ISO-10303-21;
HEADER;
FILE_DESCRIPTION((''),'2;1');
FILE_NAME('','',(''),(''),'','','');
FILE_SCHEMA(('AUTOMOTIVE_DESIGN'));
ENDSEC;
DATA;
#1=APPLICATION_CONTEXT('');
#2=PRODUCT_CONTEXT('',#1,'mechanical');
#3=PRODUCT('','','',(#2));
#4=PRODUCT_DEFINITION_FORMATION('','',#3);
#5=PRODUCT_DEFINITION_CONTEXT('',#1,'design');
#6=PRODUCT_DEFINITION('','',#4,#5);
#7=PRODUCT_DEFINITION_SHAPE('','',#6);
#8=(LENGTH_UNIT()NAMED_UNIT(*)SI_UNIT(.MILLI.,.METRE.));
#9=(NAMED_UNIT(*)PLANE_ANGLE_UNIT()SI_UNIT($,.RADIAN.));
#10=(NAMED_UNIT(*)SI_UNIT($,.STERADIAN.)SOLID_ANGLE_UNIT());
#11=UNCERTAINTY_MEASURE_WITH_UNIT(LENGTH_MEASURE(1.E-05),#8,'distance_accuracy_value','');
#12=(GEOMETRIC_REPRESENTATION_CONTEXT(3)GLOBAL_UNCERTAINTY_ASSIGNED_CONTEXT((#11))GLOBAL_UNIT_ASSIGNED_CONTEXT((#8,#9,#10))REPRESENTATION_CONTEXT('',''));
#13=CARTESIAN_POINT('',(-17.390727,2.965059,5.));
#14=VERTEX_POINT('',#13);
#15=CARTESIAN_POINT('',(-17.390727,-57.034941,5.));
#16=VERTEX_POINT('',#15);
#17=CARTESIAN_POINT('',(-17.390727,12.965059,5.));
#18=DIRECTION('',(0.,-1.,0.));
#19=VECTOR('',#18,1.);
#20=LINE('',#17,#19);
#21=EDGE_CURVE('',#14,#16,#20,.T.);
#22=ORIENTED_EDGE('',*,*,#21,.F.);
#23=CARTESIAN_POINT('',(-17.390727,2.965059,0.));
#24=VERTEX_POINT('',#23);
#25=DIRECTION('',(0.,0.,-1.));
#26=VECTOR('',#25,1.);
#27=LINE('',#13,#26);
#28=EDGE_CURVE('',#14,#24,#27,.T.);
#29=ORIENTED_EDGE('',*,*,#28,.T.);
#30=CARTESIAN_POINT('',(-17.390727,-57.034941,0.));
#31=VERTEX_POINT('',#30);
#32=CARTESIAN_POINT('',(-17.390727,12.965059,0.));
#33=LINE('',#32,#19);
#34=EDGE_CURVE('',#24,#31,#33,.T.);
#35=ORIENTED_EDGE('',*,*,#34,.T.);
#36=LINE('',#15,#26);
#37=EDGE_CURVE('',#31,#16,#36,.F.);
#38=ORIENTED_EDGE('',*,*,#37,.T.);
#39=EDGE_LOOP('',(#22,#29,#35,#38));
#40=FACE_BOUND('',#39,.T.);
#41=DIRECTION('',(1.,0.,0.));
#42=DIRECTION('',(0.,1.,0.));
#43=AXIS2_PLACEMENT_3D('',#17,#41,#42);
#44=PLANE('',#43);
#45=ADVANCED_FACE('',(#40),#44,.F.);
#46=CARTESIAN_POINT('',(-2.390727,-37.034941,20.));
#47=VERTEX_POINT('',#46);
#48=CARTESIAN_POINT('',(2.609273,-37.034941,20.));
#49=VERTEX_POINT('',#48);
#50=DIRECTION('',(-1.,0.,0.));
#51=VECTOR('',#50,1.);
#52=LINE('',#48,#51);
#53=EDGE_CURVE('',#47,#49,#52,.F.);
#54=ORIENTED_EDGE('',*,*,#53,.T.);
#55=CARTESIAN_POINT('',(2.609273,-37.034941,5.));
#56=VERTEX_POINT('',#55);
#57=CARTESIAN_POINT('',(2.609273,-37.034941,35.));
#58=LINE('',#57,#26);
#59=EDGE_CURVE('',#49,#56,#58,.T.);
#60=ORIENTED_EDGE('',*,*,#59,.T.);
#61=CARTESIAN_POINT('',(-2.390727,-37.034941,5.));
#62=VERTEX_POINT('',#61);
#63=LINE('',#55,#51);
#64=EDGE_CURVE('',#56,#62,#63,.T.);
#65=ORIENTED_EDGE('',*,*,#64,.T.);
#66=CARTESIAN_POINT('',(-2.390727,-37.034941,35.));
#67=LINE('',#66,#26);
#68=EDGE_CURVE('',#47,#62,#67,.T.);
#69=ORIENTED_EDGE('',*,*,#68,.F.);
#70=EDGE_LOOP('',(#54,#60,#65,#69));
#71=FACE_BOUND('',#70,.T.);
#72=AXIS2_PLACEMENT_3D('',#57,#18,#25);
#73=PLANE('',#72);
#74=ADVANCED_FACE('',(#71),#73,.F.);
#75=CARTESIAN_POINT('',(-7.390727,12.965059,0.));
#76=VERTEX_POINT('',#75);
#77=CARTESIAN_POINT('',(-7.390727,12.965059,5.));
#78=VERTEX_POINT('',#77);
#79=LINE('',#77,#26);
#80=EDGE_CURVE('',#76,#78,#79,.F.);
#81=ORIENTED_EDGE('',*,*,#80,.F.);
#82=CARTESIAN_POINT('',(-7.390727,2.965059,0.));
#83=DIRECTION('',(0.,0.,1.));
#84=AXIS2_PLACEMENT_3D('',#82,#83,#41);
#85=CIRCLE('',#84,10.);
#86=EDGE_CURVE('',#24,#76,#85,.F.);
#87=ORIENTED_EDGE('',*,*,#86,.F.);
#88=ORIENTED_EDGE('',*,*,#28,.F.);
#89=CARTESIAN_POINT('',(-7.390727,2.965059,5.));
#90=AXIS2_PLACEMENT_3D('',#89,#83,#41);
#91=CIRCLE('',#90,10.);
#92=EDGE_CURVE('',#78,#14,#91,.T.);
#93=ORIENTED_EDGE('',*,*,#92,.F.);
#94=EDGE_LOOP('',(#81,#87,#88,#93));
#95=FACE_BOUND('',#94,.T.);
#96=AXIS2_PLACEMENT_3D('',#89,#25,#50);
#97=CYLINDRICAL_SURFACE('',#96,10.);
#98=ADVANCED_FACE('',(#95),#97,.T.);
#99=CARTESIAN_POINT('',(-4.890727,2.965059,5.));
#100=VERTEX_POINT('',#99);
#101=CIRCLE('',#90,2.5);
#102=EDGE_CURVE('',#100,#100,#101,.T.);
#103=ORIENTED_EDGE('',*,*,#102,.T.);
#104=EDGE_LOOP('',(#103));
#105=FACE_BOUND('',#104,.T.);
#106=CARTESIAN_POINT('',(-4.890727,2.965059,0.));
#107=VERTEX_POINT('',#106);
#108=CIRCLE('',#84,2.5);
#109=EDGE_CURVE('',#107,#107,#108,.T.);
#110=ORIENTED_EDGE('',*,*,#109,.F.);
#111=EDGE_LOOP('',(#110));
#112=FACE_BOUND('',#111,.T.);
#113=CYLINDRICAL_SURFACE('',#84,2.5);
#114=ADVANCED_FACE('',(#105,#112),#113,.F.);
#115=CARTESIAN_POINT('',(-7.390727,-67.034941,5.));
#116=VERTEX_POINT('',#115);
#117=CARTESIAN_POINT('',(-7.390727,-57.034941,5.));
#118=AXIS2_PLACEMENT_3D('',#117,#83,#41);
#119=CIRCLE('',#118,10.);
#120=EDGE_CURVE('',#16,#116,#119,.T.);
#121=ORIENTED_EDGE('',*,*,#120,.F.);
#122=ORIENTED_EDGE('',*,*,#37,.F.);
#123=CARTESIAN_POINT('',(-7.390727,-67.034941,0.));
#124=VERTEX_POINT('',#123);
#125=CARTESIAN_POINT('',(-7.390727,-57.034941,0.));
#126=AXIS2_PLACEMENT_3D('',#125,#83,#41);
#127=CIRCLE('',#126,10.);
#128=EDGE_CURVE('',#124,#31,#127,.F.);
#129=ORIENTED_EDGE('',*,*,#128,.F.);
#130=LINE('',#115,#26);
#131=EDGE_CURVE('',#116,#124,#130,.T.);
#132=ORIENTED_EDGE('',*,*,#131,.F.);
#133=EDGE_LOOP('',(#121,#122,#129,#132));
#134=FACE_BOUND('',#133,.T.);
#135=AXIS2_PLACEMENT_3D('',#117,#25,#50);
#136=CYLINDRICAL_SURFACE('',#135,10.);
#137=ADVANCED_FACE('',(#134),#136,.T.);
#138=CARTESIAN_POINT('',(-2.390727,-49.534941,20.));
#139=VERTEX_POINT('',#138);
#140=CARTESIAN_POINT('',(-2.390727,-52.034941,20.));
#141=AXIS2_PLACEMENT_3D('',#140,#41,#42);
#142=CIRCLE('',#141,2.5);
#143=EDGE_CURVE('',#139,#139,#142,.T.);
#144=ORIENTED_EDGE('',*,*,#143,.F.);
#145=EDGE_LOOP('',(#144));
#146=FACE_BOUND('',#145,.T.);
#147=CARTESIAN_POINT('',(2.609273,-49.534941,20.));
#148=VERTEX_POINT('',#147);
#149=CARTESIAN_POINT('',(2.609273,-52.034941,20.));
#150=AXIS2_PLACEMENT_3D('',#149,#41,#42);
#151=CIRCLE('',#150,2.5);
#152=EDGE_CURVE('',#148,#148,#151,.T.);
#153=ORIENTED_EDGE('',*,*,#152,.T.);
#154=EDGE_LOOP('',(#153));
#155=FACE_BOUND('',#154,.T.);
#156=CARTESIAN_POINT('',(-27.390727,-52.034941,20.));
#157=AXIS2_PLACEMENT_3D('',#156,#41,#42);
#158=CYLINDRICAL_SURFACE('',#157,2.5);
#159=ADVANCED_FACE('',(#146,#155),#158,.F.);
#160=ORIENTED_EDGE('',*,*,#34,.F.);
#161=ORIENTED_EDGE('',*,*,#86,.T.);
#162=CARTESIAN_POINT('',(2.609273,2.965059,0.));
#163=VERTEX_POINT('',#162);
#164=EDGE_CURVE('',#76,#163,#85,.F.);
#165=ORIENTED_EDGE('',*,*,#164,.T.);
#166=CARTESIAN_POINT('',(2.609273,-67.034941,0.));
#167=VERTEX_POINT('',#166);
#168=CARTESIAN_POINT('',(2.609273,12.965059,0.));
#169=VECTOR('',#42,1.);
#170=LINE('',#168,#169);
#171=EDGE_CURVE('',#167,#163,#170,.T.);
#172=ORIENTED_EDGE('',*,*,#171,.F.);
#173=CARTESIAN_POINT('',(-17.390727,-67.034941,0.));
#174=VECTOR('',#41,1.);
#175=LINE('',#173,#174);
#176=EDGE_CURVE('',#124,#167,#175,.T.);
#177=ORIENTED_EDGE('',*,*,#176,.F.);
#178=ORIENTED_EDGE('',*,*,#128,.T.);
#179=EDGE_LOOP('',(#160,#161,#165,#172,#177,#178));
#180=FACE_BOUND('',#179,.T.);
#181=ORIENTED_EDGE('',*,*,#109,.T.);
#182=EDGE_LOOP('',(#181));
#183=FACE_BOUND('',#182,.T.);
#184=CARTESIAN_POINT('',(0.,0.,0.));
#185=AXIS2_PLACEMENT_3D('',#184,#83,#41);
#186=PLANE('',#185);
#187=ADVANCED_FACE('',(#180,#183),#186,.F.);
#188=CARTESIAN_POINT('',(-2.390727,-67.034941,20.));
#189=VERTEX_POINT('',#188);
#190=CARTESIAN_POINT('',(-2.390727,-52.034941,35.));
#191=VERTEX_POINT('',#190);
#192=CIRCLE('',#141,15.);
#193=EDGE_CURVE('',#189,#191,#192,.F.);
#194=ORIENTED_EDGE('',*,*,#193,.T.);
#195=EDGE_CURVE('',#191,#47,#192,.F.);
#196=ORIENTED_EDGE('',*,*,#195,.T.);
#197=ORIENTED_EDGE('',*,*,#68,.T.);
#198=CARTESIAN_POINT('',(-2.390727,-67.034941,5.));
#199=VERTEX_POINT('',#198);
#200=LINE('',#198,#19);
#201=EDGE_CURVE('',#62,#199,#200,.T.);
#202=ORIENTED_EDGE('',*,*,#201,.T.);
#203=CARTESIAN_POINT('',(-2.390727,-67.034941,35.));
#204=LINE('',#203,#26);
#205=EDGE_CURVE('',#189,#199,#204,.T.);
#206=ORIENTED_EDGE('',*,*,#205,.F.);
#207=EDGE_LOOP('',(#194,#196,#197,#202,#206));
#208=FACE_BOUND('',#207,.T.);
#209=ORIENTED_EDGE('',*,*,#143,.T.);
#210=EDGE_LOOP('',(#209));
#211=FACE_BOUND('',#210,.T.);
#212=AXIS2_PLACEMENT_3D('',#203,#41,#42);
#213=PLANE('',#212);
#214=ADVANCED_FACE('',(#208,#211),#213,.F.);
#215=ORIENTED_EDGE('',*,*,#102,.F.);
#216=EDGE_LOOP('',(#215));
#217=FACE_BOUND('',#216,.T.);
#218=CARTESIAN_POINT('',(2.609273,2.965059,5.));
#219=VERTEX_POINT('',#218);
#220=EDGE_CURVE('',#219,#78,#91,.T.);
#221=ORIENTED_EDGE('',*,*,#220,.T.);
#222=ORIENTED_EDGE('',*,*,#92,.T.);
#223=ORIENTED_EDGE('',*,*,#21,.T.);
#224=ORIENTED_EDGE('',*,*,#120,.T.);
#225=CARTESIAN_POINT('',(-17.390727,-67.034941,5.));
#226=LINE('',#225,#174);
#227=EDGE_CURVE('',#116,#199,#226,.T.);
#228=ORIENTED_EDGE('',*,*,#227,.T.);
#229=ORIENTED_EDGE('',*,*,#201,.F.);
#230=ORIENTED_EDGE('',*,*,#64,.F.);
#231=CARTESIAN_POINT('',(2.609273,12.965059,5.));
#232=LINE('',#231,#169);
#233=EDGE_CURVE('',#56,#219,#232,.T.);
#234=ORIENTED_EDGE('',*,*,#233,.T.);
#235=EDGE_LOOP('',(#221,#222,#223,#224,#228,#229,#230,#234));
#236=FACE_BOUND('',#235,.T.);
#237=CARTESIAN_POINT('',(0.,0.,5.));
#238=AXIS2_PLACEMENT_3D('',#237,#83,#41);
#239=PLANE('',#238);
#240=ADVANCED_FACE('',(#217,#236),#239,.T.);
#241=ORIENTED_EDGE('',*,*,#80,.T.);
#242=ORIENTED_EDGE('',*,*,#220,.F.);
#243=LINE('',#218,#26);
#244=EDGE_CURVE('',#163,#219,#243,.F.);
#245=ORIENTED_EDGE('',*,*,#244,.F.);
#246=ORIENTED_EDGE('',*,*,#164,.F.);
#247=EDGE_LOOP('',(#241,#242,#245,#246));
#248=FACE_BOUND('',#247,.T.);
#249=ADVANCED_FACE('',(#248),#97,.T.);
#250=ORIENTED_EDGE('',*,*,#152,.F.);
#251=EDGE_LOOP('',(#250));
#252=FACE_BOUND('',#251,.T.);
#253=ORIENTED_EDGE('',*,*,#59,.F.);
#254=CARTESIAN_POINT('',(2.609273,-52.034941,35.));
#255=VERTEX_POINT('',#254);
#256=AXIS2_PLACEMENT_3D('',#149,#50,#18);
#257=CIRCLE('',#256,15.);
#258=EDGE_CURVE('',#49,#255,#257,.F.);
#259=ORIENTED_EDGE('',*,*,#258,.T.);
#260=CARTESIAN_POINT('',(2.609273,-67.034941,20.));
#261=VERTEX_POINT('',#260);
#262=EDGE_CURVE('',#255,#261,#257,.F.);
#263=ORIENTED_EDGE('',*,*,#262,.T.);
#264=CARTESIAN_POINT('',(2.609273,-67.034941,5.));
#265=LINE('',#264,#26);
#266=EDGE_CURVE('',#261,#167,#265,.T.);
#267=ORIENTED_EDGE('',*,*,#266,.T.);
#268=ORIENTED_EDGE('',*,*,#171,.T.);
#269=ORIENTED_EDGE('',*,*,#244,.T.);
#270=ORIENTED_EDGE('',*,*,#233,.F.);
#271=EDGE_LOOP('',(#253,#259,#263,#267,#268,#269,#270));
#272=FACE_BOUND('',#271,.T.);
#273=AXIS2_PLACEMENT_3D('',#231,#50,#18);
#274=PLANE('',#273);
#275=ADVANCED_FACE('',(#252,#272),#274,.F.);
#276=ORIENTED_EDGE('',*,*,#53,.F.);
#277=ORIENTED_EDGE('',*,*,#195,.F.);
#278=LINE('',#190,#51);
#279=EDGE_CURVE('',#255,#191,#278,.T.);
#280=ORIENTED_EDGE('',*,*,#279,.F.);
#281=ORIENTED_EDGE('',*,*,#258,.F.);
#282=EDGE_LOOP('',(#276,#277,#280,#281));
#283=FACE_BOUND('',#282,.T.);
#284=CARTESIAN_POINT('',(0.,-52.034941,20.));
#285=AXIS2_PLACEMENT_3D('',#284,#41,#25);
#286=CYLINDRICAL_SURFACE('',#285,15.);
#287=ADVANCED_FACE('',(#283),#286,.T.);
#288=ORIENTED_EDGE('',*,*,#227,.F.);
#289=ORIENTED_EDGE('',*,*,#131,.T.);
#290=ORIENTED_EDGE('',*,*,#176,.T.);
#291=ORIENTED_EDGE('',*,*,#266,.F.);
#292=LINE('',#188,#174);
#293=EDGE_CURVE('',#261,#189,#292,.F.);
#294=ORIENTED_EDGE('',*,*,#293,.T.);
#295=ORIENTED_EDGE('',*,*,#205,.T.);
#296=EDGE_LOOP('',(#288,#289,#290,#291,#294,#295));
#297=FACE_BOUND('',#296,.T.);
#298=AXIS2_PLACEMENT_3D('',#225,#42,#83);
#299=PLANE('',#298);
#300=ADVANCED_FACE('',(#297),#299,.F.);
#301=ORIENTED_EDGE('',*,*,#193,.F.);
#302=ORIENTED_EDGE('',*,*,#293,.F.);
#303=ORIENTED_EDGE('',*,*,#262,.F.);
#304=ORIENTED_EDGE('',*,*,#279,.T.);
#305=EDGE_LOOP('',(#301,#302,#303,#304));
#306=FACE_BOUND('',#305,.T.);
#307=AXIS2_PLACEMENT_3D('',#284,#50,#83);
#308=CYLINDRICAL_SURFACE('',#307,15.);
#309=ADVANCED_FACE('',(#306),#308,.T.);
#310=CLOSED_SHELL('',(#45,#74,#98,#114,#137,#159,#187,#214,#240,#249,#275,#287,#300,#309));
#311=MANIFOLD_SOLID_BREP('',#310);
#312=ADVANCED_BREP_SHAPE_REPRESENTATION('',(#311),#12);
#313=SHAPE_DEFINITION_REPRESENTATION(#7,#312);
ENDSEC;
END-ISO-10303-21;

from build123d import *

# Parameters (mm, degrees)
ESQUISSE1_W             = 20
ESQUISSE1_H             = 80
BOSS_EXTRU_1_DEPTH      = 5
ESQUISSE2_R             = 2.5
ENL_V_MAT_EXTRU_1_DEPTH = 5
ESQUISSE3_W             = 5
ESQUISSE3_H             = 30
BOSS_EXTRU_2_DEPTH      = 30
ESQUISSE4_R             = 2.5
ENL_V_MAT_EXTRU_2_DEPTH = 30
CONG_1_R                = 15
CONG_2_R                = 10


with BuildPart() as part:
    # Esquisse1 → Boss.-Extru.1 (new body)
    with BuildSketch(Plane.XY):
        with Locations((-7.390726734, -27.034940778)):
            Rectangle(ESQUISSE1_W, ESQUISSE1_H)
    extrude(amount=BOSS_EXTRU_1_DEPTH)

    # Esquisse2 → Enlèv. mat.-Extru.1 (cut)
    with BuildSketch(Plane.XY.offset(5)):
        with Locations((-7.390726734, 2.965059222)):
            Circle(ESQUISSE2_R)
    extrude(amount=-ENL_V_MAT_EXTRU_1_DEPTH, mode=Mode.SUBTRACT)

    # Esquisse3 → Boss.-Extru.2 (add)
    with BuildSketch(Plane.XY.offset(5)):
        with Locations((0.109273266, -52.034940778)):
            Rectangle(ESQUISSE3_W, ESQUISSE3_H)
    extrude(amount=BOSS_EXTRU_2_DEPTH)

    # Esquisse4 → Enlèv. mat.-Extru.2 (cut)
    with BuildSketch(Plane(origin=(2.609273266, 0, 0), x_dir=(0, 0, -1), z_dir=(1, 0, 0))):
        with Locations(Location((-20, -52.034940778, 0), (0, 0, 90))):
            Circle(ESQUISSE4_R)
    extrude(amount=-ENL_V_MAT_EXTRU_2_DEPTH, mode=Mode.SUBTRACT)

    # Congé1
    cong_1_edges = [part.edges().sort_by_distance(p)[0] for p in [
        (0.109273266, -67.034940778, 35),
        (0.109273266, -37.034940778, 35),
    ]]
    fillet(cong_1_edges, radius=CONG_1_R - 0.0001)  # a hair under: the kernel refuses the full size

    # Congé2
    cong_2_edges = [part.edges().sort_by_distance(p)[0] for p in [
        (-17.390726734, -67.034940778, 2.5),
        (2.609273266, 12.965059222, 2.5),
        (-17.390726734, 12.965059222, 2.5),
    ]]
    fillet(cong_2_edges, radius=CONG_2_R - 0.0001)  # a hair under: the kernel refuses the full size


solid = part.part
